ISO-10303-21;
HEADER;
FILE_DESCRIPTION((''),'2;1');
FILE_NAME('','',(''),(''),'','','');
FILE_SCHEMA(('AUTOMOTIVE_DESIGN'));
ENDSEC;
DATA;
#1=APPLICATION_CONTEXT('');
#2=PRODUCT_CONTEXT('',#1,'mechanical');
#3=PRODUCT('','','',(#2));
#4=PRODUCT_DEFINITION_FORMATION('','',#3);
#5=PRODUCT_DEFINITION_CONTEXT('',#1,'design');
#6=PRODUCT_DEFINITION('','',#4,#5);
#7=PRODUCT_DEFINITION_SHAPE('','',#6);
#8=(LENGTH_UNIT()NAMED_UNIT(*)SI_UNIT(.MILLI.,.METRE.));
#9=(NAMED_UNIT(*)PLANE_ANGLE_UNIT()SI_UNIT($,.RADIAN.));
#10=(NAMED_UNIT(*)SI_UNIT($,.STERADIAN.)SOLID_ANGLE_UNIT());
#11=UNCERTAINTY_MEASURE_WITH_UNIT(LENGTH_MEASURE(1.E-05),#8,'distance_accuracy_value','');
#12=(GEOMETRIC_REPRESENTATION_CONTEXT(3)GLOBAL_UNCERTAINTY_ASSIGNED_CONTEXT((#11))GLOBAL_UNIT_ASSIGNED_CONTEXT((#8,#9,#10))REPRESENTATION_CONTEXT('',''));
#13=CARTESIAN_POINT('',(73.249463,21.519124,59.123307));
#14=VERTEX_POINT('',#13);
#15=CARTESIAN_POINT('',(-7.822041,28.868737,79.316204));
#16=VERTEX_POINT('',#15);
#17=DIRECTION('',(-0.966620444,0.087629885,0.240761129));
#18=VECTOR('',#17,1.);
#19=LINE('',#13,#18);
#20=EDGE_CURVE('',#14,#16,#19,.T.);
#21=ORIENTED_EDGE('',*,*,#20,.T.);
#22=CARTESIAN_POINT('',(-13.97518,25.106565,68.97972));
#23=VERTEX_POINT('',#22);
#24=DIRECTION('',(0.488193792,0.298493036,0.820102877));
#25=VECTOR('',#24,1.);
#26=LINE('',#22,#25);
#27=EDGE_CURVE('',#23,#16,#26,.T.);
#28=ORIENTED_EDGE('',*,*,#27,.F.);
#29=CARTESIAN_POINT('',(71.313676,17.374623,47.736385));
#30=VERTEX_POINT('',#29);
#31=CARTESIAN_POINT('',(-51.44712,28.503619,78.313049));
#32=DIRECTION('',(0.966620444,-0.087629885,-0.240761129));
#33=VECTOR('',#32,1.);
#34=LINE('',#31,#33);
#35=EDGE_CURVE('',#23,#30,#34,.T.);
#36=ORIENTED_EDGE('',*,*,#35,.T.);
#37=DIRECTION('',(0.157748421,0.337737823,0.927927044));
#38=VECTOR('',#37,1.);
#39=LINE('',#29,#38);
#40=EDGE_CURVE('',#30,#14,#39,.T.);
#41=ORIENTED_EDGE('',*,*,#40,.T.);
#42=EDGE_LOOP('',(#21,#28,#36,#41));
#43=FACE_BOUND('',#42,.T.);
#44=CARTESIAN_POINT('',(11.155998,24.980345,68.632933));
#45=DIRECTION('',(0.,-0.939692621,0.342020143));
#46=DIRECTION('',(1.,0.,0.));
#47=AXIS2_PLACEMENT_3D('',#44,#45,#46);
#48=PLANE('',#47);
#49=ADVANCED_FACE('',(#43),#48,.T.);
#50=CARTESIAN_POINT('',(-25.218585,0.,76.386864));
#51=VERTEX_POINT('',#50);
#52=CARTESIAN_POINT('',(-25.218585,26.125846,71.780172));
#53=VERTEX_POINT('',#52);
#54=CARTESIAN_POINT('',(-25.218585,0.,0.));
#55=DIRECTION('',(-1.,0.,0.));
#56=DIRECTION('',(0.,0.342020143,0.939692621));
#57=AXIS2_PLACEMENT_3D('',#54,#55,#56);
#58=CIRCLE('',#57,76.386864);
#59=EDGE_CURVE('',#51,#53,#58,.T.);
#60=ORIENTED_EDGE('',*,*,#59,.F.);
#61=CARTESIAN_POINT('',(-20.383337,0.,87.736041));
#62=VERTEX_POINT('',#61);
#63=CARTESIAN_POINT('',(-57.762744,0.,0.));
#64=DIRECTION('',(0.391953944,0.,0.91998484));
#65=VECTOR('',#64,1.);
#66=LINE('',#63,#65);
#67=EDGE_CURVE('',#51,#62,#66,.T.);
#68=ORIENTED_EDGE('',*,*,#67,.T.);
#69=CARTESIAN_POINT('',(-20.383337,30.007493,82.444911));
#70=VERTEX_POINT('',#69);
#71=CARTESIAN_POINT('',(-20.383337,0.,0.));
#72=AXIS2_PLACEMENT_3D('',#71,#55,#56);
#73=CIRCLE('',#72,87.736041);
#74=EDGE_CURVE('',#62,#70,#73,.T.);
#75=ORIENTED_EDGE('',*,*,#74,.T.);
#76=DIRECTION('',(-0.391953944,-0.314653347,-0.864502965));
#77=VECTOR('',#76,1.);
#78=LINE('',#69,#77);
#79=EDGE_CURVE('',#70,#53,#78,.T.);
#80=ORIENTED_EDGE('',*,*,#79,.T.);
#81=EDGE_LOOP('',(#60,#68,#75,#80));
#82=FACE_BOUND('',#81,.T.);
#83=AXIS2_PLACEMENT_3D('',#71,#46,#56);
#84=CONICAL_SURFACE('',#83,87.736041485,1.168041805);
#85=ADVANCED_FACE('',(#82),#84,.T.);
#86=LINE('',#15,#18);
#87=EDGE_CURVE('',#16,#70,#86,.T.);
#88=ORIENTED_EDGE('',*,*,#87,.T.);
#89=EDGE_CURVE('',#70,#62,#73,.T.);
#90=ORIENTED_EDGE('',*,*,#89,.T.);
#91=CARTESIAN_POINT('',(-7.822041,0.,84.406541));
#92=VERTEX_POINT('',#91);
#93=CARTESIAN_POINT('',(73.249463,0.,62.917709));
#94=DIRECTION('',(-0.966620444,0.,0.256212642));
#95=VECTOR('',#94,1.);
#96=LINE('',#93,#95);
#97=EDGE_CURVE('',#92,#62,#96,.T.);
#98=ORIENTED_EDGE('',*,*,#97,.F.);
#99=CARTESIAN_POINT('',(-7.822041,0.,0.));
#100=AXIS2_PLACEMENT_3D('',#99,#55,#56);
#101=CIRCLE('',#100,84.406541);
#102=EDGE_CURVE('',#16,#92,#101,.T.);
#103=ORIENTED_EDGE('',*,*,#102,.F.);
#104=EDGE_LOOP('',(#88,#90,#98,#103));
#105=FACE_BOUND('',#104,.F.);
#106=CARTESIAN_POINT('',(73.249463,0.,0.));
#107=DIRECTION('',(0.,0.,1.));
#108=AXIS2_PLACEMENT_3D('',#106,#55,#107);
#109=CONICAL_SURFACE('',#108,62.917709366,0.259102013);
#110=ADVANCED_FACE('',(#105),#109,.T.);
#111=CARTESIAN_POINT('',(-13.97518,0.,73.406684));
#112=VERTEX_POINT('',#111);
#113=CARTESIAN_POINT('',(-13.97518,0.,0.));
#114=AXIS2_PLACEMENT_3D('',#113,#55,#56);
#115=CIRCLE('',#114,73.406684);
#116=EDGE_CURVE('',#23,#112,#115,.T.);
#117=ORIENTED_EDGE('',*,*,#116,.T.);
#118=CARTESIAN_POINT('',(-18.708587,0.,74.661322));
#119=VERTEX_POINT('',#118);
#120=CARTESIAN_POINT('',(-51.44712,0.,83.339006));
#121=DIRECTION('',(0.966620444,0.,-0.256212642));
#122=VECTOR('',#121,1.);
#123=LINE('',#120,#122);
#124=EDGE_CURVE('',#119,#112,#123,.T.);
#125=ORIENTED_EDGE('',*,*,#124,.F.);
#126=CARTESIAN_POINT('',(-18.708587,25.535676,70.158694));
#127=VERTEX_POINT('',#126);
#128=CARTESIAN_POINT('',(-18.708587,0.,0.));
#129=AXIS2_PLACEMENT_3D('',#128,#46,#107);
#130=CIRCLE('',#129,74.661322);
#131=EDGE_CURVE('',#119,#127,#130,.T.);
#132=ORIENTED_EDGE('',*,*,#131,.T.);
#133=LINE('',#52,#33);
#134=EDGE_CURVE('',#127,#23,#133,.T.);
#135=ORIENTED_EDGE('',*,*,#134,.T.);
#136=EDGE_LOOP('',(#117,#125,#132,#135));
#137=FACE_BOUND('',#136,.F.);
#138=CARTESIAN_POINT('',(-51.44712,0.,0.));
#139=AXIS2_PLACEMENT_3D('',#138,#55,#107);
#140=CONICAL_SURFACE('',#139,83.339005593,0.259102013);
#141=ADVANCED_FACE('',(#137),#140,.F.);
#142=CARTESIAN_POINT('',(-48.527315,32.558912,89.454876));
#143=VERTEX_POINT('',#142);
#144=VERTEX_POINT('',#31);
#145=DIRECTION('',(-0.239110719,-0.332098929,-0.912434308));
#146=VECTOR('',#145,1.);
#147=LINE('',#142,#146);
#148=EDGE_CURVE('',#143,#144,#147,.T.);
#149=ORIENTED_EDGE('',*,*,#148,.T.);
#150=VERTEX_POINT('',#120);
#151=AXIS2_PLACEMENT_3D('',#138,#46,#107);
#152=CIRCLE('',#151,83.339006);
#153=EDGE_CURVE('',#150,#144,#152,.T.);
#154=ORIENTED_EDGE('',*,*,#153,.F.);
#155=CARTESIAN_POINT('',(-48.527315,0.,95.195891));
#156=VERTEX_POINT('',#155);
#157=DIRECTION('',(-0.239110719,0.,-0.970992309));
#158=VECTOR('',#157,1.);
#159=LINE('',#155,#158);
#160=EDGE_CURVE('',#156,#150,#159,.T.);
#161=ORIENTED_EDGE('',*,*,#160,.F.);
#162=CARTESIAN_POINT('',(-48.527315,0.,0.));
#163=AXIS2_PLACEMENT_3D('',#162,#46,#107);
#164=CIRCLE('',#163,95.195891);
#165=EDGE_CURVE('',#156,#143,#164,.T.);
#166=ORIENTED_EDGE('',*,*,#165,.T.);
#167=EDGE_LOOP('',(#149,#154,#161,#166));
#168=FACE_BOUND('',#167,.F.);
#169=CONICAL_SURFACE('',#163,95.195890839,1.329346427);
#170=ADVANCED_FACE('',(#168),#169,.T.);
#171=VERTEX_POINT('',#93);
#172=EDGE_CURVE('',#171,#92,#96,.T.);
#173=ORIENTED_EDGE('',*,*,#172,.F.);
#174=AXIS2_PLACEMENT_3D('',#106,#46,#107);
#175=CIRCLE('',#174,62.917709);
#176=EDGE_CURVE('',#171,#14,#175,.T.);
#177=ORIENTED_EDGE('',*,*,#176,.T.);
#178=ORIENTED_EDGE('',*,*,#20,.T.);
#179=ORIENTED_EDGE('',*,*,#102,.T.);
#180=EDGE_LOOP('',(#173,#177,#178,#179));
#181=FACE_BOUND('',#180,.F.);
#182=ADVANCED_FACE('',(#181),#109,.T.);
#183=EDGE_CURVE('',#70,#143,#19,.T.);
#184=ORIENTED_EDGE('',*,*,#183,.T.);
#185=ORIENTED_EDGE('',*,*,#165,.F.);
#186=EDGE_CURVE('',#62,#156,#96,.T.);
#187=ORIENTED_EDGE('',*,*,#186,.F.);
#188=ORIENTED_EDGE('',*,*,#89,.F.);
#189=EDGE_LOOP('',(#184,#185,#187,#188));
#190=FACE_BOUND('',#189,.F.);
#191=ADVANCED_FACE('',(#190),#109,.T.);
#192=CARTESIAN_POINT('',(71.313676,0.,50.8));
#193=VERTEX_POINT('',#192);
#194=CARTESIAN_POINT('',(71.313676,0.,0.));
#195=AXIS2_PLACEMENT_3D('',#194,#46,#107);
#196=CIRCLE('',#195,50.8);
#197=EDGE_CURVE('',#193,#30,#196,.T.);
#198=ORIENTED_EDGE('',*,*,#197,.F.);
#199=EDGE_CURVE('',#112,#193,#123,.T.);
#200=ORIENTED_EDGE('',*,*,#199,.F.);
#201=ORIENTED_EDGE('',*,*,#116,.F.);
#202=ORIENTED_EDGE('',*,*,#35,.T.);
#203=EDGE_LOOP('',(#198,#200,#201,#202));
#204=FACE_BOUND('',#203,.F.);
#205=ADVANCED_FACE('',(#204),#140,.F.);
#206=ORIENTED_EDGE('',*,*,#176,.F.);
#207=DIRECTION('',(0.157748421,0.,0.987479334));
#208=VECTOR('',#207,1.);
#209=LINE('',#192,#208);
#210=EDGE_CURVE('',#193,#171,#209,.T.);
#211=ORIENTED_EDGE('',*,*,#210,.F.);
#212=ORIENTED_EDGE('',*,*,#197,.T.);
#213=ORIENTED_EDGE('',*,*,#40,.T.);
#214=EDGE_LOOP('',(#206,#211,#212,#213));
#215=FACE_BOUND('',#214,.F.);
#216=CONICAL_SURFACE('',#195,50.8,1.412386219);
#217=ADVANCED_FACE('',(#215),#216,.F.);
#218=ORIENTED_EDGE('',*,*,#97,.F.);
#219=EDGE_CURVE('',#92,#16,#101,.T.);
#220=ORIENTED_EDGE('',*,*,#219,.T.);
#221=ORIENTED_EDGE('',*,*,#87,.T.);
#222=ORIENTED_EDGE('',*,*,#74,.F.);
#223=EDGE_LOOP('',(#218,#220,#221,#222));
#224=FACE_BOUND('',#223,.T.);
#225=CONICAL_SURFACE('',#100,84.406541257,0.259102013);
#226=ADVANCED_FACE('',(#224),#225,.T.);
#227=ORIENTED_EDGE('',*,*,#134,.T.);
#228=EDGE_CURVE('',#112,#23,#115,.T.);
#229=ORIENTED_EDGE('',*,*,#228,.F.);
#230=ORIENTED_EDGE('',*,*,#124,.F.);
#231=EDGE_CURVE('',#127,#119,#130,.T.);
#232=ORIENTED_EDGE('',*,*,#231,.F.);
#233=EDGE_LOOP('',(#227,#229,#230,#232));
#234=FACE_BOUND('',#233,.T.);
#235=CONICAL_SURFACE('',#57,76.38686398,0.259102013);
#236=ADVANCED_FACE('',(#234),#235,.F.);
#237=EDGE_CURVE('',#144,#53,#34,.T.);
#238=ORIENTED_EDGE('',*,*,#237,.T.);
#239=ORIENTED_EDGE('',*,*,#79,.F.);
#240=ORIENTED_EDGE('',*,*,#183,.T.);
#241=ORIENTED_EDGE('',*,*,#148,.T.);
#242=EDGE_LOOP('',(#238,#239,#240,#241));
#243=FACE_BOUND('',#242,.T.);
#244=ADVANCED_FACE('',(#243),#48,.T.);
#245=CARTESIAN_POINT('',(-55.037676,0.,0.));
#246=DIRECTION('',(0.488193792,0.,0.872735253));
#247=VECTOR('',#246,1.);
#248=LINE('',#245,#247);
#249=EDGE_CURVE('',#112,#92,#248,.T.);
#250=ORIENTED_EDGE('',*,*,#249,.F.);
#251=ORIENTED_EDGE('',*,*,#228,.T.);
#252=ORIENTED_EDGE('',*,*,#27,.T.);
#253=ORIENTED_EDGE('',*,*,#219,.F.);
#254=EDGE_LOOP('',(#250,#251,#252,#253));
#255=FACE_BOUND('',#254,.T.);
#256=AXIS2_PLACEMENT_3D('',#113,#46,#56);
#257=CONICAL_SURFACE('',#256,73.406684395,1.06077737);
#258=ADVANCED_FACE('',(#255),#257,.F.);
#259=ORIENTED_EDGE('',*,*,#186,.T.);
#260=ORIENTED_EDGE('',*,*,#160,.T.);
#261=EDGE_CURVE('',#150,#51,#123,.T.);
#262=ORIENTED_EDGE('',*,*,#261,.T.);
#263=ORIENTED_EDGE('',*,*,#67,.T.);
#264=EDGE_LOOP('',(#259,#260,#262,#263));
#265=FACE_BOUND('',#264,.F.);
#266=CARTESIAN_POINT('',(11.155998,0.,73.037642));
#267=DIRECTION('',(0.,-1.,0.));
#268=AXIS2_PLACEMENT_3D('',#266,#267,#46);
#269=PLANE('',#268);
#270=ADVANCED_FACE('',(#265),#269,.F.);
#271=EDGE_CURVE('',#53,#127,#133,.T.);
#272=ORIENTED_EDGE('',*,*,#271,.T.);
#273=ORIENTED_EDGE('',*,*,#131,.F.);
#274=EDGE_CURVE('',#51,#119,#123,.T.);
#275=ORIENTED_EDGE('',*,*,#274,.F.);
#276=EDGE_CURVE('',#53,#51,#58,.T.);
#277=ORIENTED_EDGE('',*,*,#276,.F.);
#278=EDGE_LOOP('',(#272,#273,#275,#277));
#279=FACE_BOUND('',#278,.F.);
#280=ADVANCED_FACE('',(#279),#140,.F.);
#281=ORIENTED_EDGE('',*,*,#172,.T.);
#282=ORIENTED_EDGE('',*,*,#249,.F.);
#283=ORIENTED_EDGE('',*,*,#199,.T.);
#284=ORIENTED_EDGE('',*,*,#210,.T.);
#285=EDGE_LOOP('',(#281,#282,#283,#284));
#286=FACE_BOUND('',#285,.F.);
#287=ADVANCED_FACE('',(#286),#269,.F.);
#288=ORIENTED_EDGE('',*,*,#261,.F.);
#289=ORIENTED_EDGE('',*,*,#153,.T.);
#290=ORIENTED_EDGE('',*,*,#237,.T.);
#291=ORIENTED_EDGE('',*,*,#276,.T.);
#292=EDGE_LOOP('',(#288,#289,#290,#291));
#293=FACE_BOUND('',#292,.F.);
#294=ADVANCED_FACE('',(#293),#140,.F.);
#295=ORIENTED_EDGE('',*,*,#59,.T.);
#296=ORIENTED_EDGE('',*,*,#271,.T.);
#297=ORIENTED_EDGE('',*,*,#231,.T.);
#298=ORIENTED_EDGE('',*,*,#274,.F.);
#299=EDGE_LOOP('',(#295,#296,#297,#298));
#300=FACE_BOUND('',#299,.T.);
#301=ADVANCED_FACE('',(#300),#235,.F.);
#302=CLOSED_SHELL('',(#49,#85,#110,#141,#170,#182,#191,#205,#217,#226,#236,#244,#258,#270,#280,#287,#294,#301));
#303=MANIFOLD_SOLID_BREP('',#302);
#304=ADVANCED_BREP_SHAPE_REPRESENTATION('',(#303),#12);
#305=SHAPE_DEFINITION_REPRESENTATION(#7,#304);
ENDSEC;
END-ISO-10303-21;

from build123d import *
from build123d import SkipClean  # not in build123d's __all__

# Parameters (mm, degrees)
F1_ANGLE = 340


with BuildPart() as f1:
    # F0 (on Front) → F1 (revolve)
    with BuildSketch(Plane.XZ):
        Polygon((-48.5273150222, 95.1958908392), (-51.4471201788, 83.3390055934), (71.3136761488, 50.8), (73.2494630124, 62.9177093663), align=None)
    revolve(axis=Axis((3.1582843512, 0, 0), (1, 0, 0)), revolution_arc=F1_ANGLE)

    # F2 (on face) → F3 (revolve)
    with BuildSketch(Plane(origin=(0, 0, 0), x_dir=(1, 0, 0), z_dir=(0, -0.9396926208, 0.3420201433))):
        Polygon((-7.8220407683, 84.4065412565), (-20.3833373413, 87.7360414852), (-25.218585377, 76.3868639802), (-13.9751803482, 73.4066843946), align=None)
    with SkipClean():  # cleaning this boolean's faces spoils the solid; the shape is the same uncleaned
        revolve(axis=Axis((73.2494630124, 0, 0), (-1, 0, 0)))


solid = f1.part
